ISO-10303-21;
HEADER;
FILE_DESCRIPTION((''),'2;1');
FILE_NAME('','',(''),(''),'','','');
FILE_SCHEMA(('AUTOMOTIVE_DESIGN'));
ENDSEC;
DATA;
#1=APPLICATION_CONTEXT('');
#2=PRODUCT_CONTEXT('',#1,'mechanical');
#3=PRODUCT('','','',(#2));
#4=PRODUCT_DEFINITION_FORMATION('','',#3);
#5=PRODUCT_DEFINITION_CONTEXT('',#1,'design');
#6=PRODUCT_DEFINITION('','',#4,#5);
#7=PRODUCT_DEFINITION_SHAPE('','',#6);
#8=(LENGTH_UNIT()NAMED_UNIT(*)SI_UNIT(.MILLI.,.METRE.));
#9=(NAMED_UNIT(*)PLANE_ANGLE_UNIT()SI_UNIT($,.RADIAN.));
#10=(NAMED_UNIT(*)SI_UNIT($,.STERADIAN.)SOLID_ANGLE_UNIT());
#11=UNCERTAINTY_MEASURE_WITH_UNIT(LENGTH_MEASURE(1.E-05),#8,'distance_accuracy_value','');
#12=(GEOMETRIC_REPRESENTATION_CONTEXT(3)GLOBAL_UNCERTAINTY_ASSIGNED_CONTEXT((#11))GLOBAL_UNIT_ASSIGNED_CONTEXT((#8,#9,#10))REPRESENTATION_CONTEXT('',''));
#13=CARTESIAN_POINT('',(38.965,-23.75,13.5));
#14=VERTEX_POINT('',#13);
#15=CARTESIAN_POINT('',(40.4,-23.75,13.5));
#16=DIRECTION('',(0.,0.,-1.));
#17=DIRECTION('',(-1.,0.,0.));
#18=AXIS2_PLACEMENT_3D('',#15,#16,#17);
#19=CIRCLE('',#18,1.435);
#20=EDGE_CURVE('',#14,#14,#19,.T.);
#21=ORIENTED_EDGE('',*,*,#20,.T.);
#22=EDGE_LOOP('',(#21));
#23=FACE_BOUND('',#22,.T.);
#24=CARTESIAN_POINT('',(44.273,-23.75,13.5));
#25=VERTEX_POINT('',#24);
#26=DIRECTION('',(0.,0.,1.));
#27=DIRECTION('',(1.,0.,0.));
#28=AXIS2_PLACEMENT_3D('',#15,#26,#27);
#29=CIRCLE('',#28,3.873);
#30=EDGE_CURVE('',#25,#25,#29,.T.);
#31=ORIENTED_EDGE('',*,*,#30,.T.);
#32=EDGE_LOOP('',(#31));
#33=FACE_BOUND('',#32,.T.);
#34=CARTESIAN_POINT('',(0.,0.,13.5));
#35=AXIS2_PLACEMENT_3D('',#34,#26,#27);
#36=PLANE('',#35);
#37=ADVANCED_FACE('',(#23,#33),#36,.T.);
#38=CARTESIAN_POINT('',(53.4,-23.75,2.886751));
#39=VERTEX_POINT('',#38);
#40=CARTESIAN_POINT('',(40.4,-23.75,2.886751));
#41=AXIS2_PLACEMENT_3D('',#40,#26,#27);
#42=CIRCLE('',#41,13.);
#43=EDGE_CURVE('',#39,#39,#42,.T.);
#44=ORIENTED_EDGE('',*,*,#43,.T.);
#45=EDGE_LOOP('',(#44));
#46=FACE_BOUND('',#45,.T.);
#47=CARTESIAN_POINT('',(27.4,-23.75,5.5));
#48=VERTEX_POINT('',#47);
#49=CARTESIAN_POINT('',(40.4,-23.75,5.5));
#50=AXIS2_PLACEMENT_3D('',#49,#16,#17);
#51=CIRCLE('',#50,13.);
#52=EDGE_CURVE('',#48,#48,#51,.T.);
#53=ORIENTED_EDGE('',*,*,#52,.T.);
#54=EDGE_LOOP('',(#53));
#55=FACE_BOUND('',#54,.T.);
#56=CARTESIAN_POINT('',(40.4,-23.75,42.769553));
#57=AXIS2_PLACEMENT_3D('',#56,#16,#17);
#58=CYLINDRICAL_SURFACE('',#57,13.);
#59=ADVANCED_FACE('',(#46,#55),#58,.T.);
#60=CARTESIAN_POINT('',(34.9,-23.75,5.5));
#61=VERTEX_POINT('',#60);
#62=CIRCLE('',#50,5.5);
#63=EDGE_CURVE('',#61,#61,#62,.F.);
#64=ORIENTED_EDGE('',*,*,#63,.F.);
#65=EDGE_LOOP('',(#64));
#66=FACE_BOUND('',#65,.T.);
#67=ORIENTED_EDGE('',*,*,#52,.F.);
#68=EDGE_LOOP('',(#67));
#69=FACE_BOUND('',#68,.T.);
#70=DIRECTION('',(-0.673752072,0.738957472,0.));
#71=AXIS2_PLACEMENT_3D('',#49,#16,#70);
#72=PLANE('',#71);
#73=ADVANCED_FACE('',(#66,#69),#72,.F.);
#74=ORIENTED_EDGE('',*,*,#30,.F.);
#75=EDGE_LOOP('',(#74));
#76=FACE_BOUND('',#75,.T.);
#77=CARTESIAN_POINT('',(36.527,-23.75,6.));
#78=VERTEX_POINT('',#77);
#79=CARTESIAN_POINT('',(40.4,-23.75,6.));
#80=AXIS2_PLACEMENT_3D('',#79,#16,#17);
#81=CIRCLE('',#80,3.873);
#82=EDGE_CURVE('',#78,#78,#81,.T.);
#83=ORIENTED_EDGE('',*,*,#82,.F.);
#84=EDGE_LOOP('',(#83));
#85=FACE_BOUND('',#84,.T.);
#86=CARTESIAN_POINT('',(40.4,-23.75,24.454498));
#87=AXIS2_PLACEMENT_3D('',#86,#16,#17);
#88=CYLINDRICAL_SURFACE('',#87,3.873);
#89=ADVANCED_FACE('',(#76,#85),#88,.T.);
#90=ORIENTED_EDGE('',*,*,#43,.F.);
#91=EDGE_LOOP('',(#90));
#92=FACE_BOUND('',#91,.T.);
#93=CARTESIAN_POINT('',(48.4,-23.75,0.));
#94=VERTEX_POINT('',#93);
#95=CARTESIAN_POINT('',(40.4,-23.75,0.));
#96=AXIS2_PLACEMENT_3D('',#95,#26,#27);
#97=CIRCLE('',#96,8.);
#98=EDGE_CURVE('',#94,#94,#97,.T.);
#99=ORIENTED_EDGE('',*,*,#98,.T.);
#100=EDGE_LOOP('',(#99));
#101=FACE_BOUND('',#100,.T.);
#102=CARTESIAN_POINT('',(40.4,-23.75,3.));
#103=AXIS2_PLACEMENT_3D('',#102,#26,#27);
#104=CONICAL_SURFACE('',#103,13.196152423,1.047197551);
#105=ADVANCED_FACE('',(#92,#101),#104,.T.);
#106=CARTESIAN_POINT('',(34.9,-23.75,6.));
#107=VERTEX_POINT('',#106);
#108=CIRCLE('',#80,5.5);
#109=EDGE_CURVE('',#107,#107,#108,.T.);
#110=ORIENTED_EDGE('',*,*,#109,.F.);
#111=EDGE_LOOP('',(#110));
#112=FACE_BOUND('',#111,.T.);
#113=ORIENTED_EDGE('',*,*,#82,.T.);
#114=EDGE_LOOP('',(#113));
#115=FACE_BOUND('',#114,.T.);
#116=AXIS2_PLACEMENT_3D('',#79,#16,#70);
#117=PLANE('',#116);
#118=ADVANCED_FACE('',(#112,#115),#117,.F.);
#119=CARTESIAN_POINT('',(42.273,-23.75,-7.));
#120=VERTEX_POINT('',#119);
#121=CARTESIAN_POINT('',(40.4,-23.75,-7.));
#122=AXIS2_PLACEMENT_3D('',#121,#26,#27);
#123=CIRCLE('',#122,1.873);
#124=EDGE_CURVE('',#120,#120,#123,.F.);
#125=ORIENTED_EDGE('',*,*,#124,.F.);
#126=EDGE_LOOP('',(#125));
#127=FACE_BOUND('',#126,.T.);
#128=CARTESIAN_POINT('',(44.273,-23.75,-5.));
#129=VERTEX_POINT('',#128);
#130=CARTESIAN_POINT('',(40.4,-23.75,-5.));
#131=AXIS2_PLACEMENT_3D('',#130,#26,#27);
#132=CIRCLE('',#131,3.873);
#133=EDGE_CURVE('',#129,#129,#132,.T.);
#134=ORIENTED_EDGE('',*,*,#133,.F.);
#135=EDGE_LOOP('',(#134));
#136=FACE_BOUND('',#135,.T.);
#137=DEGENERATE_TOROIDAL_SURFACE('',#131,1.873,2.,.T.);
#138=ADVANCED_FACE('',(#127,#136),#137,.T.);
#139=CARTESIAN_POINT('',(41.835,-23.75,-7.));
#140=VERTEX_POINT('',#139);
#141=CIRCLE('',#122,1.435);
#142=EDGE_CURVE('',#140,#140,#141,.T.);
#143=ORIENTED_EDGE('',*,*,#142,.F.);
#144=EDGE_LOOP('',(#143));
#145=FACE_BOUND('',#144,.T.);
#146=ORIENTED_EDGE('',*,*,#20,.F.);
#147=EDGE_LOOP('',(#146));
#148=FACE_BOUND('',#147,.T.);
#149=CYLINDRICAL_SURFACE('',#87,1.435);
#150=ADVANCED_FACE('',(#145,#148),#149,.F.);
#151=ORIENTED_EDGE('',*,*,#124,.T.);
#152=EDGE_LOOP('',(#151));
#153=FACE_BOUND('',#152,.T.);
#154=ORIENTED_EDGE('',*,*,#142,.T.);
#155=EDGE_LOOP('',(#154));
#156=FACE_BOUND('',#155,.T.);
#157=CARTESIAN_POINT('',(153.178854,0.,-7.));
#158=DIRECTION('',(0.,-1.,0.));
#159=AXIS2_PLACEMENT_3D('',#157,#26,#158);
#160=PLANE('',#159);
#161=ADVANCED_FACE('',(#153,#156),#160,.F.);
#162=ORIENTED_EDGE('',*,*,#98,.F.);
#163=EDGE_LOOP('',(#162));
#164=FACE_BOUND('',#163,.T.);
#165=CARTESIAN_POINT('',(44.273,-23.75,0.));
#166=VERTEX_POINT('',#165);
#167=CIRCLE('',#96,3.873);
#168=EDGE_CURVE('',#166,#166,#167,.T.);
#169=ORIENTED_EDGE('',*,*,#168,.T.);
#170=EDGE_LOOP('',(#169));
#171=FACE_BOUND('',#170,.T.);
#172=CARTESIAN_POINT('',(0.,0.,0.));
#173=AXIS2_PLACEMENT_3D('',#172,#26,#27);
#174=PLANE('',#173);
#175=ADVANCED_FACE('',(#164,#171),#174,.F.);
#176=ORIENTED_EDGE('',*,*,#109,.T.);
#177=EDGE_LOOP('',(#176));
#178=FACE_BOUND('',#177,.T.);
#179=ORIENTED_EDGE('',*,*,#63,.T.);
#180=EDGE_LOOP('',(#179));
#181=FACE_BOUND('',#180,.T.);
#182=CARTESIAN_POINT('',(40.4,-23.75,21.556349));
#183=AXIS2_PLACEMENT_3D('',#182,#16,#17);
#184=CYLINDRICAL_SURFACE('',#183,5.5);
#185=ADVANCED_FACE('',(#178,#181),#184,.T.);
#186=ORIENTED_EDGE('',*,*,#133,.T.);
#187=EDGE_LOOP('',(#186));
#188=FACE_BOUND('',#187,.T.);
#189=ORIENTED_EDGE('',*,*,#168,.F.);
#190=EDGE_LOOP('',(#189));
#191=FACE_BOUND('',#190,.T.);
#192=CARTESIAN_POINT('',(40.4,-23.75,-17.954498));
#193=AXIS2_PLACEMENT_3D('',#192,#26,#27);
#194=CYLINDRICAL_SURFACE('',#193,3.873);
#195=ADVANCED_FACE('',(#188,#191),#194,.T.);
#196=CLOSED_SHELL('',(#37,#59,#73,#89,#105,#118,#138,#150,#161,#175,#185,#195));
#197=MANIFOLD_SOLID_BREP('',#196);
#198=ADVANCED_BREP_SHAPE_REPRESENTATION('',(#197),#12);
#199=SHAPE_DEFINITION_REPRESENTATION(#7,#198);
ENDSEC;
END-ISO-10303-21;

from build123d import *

# Parameters (mm, degrees)
SKETCH1_R               = 3.873
BOSS_EXTRUDE1_DEPTH     = 7
FILLET1_R               = 2.000000064
BOSS_EXTRUDE2_START     = 3
SKETCH2_R               = 8
SKETCH2_R_2             = 3.873
BOSS_EXTRUDE2_DEPTH     = 3
SKETCH3_R               = 13
BOSS_EXTRUDE3_DEPTH     = 2.5
CHAMFER1_SIZE           = 5.196152423
CHAMFER1_SIZE_2         = 3
BOSS_EXTRUDE4_START     = 8
SKETCH4_R               = 3.873
SKETCH4_R_2             = 1.435
BOSS_EXTRUDE4_DEPTH     = 8
BOSS_EXTRUDE5_START     = 0.5
SKETCH4_3_R             = 5.5
SKETCH4_3_R_2           = 3.873
SKETCH4_3_R_3           = 1.435
BOSS_EXTRUDE5_DEPTH     = 0.5
CUT_EXTRUDE1_DEPTH      = 67.017971016
CUT_EXTRUDE1_DEPTH_BACK = 67.017971016
SKETCH6_R               = 1.435


with BuildPart() as part:
    # Sketch1 → Boss-Extrude1 (new body)
    with BuildSketch(Plane.XY):
        with Locations((40.399999972, -23.75)):
            Circle(SKETCH1_R)
    extrude(amount=-BOSS_EXTRUDE1_DEPTH)

    # Fillet1
    fillet1_edges = [part.edges().sort_by_distance(p)[0] for p in [
        (36.526999972, -23.75, -7),
    ]]
    fillet(fillet1_edges, radius=FILLET1_R)

    # Sketch2 → Boss-Extrude2 (add)
    # profile 1 of 2: a face of its own
    with BuildSketch(Plane.XY.offset(BOSS_EXTRUDE2_START)):
        with Locations((40.399999972, -23.75)):
            Circle(SKETCH2_R)
        with Locations((40.399999972, -23.75)):
            Circle(SKETCH2_R_2, mode=Mode.SUBTRACT)
    # profile 2 of 2: a face of its own
    with BuildSketch(Plane.XY.offset(BOSS_EXTRUDE2_START)):
        with Locations((40.399999972, -23.75)):
            Circle(SKETCH2_R_2)
    extrude(amount=-BOSS_EXTRUDE2_DEPTH)

    # Sketch3 → Boss-Extrude3 (add)
    with BuildSketch(Plane.XY.offset(3)):
        with Locations(Location((40.399999972, -23.75, 0), (0, 0, 180))):
            Circle(SKETCH3_R)
    extrude(amount=BOSS_EXTRUDE3_DEPTH)

    # Chamfer1
    # the kernel refuses this chamfer: 5.196152423, 3 mm, written as the material it adds along each edge
    with BuildSketch(Plane(origin=(40.399999972, -23.75, 3), x_dir=(1, 0, 0), z_dir=(0, -1, 0))) as chamfer1_piece_1_section:
        Polygon((8 + CHAMFER1_SIZE, 0), (8, -CHAMFER1_SIZE_2), (8, 0), align=None)
    chamfer1_piece_1 = revolve(axis=Axis((40.399999972, -23.75, 3), (0, 0, 1)), mode=Mode.PRIVATE)
    chamfer1_piece_1 = chamfer1_piece_1 & Plane(origin=(40.399999972, -23.75, 1.510979696), x_dir=(-1, 0, 0), z_dir=(0, 0, -1)) * Cylinder(13, 53, mode=Mode.PRIVATE)
    add(chamfer1_piece_1)

    # Sketch4 → Boss-Extrude4 (add)
    with BuildSketch(Plane.XY.offset(5.5).offset(BOSS_EXTRUDE4_START)):
        with Locations((40.399999972, -23.75)):
            Circle(SKETCH4_R)
        with Locations(Location((40.399999972, -23.75, 0), (0, 0, 180))):
            Circle(SKETCH4_R_2, mode=Mode.SUBTRACT)
    extrude(amount=-BOSS_EXTRUDE4_DEPTH)

    # Sketch4<3> → Boss-Extrude5 (add)
    # profile 1 of 2: a face of its own
    with BuildSketch(Plane.XY.offset(5.5).offset(BOSS_EXTRUDE5_START)):
        with Locations(Location((40.399999972, -23.75, 0), (0, 0, 180))):
            Circle(SKETCH4_3_R)
        with Locations((40.399999972, -23.75)):
            Circle(SKETCH4_3_R_2, mode=Mode.SUBTRACT)
    # profile 2 of 2: a face of its own
    with BuildSketch(Plane.XY.offset(5.5).offset(BOSS_EXTRUDE5_START)):
        with Locations((40.399999972, -23.75)):
            Circle(SKETCH4_3_R_2)
        with Locations(Location((40.399999972, -23.75, 0), (0, 0, 180))):
            Circle(SKETCH4_3_R_3, mode=Mode.SUBTRACT)
    extrude(amount=-BOSS_EXTRUDE5_DEPTH)

    # Sketch6 → Cut-Extrude1 (cut, two sides: drawn at the far end of the back side and taken through both)
    with BuildSketch(Plane.XY.offset(5.5).offset(-CUT_EXTRUDE1_DEPTH_BACK)):
        with Locations(Location((40.399999972, -23.75, 0), (0, 0, 180))):
            Circle(SKETCH6_R)
    extrude(amount=CUT_EXTRUDE1_DEPTH + CUT_EXTRUDE1_DEPTH_BACK, mode=Mode.SUBTRACT)


solid = part.part
